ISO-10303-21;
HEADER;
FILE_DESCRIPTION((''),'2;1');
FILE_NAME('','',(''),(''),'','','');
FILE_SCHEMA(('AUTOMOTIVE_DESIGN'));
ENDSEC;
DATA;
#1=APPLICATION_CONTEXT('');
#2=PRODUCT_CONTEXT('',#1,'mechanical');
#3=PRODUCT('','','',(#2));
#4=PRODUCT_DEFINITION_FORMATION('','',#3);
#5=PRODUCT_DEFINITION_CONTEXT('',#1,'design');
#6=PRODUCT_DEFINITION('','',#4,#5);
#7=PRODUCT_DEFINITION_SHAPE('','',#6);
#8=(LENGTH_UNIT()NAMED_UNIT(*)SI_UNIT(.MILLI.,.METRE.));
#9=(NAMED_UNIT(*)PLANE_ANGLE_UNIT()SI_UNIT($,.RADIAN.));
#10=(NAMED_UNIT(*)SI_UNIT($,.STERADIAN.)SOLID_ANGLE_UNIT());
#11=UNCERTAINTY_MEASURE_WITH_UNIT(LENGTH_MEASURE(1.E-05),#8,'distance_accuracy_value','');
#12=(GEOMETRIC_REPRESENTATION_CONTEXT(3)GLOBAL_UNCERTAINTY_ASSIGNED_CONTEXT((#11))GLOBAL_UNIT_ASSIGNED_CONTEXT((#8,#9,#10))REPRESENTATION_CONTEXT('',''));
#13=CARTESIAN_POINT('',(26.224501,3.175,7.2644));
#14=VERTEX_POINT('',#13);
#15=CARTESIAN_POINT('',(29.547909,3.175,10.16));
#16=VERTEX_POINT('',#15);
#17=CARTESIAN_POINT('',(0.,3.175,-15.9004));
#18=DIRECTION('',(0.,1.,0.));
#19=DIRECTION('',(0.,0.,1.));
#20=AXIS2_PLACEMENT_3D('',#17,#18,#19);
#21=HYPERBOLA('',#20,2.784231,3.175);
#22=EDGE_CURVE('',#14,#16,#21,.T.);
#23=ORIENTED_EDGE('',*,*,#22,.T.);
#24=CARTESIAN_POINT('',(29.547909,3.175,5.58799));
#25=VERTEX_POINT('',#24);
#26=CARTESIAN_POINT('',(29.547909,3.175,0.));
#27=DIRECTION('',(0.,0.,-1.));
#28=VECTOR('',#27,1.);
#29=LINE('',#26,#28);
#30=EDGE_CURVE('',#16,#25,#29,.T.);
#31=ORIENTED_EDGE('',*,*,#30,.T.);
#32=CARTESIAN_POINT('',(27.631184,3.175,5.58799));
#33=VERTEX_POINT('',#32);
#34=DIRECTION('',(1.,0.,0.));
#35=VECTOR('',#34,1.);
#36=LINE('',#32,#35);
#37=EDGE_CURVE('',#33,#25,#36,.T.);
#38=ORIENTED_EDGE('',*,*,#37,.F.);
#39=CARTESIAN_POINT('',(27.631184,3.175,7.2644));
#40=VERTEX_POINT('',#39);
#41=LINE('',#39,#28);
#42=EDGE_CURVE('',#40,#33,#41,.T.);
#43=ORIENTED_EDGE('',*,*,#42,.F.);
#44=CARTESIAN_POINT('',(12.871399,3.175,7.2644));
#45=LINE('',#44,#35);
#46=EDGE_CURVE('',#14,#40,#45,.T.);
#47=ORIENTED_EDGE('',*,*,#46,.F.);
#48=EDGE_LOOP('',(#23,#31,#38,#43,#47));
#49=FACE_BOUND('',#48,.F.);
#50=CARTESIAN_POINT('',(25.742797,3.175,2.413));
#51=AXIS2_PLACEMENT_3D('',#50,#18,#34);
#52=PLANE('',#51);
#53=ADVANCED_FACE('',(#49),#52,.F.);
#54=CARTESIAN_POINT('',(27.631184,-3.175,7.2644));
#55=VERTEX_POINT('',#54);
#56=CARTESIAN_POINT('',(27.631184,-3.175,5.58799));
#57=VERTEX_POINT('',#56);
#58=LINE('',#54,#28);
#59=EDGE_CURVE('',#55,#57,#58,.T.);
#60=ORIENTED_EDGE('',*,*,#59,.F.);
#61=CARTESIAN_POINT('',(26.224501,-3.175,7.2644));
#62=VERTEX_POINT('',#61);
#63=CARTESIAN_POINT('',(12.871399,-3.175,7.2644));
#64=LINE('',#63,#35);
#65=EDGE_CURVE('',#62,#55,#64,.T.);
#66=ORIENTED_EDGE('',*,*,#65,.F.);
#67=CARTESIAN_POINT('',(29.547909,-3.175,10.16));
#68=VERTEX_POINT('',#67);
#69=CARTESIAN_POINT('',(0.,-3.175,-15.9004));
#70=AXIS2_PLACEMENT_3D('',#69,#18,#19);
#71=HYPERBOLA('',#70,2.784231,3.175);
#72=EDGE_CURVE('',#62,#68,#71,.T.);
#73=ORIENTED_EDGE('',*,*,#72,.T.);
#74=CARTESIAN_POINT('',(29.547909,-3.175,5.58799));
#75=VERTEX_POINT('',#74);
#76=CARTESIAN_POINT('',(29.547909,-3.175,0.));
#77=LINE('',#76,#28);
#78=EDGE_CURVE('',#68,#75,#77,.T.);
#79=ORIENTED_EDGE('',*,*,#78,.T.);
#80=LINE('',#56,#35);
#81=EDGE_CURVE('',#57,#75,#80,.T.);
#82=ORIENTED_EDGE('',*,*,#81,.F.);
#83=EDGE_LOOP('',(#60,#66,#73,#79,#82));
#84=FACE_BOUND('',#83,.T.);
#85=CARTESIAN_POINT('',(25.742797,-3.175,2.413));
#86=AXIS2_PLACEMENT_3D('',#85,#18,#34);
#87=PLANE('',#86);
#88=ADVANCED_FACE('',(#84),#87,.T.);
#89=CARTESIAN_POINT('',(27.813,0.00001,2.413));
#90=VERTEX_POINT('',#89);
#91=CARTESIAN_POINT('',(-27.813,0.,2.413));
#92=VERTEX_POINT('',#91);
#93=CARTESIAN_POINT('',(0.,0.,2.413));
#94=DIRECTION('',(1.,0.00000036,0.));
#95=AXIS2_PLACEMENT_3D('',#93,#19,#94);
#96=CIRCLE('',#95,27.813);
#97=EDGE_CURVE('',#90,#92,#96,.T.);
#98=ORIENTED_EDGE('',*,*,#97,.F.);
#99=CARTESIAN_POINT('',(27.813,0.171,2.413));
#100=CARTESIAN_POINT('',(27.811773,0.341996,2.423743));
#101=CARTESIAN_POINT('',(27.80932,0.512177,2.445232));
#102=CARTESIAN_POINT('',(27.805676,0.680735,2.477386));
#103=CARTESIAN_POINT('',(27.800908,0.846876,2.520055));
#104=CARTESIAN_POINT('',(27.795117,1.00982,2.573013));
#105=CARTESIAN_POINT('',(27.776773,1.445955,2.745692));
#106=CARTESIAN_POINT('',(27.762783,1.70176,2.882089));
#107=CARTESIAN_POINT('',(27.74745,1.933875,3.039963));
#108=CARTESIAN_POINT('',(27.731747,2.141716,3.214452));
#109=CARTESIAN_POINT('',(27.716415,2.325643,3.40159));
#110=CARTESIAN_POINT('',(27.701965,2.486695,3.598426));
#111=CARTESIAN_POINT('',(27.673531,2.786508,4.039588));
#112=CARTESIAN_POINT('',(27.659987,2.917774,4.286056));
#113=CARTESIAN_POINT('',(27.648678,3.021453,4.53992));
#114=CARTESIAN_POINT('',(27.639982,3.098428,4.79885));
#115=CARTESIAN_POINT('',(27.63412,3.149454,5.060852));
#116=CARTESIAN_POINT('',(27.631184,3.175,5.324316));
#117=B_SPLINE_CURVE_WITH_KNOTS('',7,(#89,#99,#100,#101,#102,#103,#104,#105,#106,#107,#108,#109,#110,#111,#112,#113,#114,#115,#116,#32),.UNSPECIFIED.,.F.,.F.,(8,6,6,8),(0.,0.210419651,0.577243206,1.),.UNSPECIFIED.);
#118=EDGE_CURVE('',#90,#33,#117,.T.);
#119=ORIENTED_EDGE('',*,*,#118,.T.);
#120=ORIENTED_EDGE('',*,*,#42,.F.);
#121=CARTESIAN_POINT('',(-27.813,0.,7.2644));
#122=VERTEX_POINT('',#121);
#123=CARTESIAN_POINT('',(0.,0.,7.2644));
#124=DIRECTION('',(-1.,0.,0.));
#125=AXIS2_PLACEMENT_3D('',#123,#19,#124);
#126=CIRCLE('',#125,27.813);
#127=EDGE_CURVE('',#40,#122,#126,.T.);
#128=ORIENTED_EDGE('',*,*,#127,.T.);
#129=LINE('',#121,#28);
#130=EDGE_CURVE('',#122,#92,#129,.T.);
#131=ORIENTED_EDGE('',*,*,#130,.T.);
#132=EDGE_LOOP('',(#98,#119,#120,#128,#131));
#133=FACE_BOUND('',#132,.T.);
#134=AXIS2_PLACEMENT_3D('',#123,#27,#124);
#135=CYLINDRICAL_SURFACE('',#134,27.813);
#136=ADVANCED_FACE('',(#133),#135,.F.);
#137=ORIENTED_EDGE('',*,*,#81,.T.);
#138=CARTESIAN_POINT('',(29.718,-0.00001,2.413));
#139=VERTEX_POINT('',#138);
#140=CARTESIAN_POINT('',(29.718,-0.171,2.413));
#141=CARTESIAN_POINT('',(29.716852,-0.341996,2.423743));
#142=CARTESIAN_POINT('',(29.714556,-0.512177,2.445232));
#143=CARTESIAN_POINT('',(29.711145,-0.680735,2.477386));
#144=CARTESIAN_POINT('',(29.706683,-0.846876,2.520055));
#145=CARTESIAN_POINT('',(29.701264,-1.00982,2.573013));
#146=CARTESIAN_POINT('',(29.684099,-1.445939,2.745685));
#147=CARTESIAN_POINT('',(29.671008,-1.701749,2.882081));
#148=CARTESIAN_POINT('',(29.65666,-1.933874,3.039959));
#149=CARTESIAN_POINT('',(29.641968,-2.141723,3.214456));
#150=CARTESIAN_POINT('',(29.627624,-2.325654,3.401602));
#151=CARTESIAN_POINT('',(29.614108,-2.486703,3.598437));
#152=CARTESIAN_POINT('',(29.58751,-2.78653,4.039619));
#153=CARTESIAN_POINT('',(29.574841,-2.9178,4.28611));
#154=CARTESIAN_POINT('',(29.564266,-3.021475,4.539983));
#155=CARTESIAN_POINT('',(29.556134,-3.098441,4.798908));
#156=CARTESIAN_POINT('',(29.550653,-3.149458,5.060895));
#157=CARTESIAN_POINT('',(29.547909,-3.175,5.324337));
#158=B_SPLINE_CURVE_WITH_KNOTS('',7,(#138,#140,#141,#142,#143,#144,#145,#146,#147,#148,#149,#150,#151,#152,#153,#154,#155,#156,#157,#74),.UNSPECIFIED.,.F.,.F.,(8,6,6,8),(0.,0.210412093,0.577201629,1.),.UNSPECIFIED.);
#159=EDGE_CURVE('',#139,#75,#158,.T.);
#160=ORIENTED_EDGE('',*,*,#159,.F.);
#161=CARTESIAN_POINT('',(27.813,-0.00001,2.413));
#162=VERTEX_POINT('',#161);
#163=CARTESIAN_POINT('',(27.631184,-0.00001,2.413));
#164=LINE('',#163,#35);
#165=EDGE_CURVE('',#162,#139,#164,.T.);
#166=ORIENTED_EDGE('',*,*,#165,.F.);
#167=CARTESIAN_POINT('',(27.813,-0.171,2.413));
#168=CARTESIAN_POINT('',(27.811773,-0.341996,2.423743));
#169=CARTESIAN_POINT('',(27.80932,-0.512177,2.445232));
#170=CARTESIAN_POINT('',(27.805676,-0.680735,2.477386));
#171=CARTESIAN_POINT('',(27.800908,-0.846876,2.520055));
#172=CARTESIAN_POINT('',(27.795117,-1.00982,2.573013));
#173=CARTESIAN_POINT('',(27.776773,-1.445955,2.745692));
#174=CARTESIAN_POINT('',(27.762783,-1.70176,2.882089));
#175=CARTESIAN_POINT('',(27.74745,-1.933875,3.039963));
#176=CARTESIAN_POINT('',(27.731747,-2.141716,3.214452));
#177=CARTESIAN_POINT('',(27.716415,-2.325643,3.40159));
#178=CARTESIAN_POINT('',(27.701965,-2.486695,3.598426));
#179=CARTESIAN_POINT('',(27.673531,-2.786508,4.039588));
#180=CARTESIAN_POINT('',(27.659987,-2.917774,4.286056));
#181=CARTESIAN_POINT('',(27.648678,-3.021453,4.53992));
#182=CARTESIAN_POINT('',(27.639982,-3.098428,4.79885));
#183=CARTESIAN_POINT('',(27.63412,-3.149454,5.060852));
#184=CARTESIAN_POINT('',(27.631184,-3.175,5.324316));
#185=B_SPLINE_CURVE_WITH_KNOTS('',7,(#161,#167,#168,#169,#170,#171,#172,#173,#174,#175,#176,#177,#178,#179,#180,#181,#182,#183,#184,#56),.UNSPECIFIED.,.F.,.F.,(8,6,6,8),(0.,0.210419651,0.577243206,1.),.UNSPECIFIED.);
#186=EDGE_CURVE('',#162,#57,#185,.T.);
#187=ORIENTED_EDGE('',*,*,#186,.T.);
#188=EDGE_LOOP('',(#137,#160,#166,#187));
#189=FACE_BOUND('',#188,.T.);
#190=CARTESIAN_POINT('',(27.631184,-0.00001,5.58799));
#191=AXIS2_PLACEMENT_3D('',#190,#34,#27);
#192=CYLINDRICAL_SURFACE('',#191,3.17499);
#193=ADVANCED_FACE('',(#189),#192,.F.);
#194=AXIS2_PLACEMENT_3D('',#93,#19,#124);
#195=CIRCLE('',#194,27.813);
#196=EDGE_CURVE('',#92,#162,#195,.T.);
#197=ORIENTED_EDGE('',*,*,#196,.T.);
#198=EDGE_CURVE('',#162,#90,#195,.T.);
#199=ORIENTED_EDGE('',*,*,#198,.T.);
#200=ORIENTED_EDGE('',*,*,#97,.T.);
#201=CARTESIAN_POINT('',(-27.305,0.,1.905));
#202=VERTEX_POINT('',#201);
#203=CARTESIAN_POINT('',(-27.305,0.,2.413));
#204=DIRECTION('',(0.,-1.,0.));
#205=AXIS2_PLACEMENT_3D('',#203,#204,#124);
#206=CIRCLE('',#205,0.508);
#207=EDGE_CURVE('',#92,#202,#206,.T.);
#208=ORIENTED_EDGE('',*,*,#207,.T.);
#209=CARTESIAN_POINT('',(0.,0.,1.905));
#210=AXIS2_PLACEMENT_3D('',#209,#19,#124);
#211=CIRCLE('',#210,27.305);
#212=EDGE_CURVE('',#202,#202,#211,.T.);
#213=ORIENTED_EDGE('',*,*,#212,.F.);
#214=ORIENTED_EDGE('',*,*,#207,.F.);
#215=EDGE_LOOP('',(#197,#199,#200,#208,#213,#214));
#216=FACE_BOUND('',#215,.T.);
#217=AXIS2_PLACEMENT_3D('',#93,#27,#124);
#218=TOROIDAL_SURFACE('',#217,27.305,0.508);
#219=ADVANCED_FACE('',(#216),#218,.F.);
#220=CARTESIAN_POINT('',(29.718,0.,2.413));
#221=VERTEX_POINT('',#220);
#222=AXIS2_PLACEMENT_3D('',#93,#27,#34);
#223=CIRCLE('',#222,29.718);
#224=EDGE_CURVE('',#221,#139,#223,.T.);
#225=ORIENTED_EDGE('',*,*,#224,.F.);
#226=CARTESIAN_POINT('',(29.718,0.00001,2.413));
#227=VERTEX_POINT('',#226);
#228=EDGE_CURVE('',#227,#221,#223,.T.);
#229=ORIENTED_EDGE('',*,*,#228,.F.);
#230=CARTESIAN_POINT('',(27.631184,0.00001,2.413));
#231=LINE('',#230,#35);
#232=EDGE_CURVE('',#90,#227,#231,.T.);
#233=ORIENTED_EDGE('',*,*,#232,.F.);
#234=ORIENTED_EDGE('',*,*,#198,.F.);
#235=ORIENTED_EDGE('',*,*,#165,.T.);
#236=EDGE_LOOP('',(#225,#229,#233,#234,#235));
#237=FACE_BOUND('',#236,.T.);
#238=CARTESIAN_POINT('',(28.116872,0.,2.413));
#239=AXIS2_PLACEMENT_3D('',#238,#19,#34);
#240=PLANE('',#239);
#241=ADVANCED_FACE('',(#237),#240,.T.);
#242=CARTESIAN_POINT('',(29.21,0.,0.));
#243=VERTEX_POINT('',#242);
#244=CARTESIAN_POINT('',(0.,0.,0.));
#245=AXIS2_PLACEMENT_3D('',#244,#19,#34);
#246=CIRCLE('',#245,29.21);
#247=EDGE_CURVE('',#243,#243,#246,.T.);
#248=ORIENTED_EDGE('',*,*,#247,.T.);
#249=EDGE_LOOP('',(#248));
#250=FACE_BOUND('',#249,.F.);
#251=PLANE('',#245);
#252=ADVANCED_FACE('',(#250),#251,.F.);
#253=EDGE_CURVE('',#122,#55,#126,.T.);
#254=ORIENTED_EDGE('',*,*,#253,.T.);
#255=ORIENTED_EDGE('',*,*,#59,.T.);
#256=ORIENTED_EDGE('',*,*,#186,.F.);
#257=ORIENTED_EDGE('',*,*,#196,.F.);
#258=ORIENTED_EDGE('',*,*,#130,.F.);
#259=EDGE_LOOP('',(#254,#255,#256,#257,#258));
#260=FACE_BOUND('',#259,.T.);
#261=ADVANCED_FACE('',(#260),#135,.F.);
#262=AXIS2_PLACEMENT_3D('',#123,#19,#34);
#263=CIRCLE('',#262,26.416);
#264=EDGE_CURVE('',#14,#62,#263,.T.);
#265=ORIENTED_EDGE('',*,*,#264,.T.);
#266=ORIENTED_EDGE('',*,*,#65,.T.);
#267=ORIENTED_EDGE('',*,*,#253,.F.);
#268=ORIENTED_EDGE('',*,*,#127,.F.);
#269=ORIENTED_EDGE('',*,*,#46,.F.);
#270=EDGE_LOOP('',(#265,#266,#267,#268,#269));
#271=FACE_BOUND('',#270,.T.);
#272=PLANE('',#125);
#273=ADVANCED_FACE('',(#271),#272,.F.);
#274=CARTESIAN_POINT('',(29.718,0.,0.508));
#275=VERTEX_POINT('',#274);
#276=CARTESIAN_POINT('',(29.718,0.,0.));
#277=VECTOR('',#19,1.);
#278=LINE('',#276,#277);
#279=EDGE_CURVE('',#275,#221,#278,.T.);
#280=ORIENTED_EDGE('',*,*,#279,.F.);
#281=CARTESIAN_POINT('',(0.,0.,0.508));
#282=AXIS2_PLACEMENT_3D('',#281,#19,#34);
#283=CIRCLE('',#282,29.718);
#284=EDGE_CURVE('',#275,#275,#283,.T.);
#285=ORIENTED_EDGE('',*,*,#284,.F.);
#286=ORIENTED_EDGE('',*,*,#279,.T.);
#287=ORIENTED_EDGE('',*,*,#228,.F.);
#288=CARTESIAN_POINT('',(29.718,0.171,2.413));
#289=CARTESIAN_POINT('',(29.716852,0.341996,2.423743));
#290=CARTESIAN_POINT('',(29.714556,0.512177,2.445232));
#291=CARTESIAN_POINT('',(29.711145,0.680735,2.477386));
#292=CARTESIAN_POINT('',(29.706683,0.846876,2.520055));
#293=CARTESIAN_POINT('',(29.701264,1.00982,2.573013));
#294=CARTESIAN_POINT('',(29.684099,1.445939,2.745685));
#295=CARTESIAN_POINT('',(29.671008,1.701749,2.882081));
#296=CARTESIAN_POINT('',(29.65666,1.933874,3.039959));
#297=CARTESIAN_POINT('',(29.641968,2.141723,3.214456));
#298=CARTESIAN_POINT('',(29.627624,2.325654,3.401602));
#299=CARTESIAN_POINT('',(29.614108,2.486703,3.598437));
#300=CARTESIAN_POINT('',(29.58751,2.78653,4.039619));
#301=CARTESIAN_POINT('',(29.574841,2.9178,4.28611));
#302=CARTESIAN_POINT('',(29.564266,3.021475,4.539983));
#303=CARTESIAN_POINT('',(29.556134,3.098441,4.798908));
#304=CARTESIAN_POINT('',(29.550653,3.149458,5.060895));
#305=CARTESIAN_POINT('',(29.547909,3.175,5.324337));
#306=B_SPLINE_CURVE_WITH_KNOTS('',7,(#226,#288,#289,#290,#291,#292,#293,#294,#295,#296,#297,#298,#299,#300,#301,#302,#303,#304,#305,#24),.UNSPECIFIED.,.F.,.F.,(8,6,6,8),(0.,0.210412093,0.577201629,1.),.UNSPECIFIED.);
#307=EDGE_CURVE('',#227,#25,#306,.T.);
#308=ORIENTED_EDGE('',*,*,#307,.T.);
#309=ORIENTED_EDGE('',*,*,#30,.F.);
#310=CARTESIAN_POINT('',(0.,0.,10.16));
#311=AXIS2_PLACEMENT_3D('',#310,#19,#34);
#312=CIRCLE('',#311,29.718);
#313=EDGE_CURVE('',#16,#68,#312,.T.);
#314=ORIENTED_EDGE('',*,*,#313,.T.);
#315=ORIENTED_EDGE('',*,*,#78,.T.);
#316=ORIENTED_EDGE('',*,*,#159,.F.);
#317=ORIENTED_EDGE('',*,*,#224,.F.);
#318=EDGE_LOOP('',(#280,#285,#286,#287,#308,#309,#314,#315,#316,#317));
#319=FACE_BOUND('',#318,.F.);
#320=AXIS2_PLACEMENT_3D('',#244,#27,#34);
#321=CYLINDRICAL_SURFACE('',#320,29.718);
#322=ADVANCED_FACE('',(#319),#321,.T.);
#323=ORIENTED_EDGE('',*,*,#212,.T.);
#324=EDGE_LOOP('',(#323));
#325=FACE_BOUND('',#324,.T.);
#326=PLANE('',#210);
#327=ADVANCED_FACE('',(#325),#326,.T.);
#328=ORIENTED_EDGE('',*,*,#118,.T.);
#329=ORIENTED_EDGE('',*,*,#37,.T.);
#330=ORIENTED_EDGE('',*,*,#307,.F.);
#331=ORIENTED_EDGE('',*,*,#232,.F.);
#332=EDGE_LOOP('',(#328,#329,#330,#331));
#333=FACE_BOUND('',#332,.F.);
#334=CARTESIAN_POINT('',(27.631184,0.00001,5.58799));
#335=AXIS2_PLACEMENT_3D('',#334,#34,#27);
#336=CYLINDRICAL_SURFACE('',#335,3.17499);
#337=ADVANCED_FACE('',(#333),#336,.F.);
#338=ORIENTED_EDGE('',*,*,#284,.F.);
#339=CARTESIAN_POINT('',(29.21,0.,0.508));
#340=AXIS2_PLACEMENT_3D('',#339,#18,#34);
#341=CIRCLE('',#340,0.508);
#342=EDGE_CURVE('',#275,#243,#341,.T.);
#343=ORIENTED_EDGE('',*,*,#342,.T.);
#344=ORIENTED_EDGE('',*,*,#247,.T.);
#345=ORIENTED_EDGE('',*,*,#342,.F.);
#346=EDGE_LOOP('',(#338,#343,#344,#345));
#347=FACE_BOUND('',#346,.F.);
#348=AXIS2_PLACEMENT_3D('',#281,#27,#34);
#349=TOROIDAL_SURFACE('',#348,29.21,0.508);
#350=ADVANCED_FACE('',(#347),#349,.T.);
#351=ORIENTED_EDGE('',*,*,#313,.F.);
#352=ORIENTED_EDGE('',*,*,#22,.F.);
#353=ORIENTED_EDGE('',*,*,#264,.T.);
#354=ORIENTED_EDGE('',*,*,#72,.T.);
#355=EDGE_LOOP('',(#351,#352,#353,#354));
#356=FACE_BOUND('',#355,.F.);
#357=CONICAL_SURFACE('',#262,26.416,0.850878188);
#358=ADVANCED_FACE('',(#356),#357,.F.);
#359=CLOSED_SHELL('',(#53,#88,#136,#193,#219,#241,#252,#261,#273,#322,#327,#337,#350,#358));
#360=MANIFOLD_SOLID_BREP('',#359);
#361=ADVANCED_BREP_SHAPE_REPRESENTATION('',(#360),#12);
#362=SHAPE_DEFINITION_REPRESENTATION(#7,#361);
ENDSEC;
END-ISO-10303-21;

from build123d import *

# Parameters (mm, degrees)
F0_R     = 29.718
F1_DEPTH = 10.16
F6_R     = 0.508
F8_W     = 4.7481491719
F8_H     = 6.35
F9_DEPTH = 25.4
F10_R    = 3.17499


# Not quite as in the source:
# - a fillet or chamfer is up to 0.001 mm smaller than in the source, because OpenCascade refuses the exact size


with BuildPart() as f1:
    # F0 (on Top) → F1 (new body)
    with BuildSketch(Plane.XY):
        Circle(F0_R)
    extrude(amount=F1_DEPTH)

    # F2 (on Front) → F3 (revolve, cut)
    with BuildSketch(Plane.XZ):
        Polygon((29.718, 10.16), (0, 10.16), (0, 7.2644), (26.416, 7.2644), align=None)
    revolve(axis=Axis((0, 0, 8.7122), (0, 0, 1)), mode=Mode.SUBTRACT)

    # F4 (on Front) → F5 (revolve, cut)
    with BuildSketch(Plane.XZ):
        Polygon((0, 7.2644), (-26.416, 7.2644), (-27.813, 7.2644), (-27.813, 1.905), (0, 1.905), align=None)
    revolve(axis=Axis((0, 0, 4.5847), (0, 0, 1)), mode=Mode.SUBTRACT)

    # F6
    f6_edges = [f1.edges().sort_by_distance(p)[0] for p in [
        (27.813, 0, 1.905),
        (-29.718, 0, 0),
    ]]
    fillet(f6_edges, radius=F6_R)

    # F8 (on face) → F9 (cut)
    with BuildSketch(Plane.XY.offset(2.413)):
        with Locations((28.1168716028, 0)):
            Rectangle(F8_W, F8_H)
    extrude(amount=F9_DEPTH, mode=Mode.SUBTRACT)

    # F10 (radius 3.175 in the source; OpenCascade refuses exactly that, so slightly less here)
    f10_edges = [f1.edges().sort_by_distance(p)[0] for p in [
        (28.589546, 3.175, 2.413),
        (28.589546, -3.175, 2.413),
    ]]
    fillet(f10_edges, radius=F10_R)


solid = f1.part
